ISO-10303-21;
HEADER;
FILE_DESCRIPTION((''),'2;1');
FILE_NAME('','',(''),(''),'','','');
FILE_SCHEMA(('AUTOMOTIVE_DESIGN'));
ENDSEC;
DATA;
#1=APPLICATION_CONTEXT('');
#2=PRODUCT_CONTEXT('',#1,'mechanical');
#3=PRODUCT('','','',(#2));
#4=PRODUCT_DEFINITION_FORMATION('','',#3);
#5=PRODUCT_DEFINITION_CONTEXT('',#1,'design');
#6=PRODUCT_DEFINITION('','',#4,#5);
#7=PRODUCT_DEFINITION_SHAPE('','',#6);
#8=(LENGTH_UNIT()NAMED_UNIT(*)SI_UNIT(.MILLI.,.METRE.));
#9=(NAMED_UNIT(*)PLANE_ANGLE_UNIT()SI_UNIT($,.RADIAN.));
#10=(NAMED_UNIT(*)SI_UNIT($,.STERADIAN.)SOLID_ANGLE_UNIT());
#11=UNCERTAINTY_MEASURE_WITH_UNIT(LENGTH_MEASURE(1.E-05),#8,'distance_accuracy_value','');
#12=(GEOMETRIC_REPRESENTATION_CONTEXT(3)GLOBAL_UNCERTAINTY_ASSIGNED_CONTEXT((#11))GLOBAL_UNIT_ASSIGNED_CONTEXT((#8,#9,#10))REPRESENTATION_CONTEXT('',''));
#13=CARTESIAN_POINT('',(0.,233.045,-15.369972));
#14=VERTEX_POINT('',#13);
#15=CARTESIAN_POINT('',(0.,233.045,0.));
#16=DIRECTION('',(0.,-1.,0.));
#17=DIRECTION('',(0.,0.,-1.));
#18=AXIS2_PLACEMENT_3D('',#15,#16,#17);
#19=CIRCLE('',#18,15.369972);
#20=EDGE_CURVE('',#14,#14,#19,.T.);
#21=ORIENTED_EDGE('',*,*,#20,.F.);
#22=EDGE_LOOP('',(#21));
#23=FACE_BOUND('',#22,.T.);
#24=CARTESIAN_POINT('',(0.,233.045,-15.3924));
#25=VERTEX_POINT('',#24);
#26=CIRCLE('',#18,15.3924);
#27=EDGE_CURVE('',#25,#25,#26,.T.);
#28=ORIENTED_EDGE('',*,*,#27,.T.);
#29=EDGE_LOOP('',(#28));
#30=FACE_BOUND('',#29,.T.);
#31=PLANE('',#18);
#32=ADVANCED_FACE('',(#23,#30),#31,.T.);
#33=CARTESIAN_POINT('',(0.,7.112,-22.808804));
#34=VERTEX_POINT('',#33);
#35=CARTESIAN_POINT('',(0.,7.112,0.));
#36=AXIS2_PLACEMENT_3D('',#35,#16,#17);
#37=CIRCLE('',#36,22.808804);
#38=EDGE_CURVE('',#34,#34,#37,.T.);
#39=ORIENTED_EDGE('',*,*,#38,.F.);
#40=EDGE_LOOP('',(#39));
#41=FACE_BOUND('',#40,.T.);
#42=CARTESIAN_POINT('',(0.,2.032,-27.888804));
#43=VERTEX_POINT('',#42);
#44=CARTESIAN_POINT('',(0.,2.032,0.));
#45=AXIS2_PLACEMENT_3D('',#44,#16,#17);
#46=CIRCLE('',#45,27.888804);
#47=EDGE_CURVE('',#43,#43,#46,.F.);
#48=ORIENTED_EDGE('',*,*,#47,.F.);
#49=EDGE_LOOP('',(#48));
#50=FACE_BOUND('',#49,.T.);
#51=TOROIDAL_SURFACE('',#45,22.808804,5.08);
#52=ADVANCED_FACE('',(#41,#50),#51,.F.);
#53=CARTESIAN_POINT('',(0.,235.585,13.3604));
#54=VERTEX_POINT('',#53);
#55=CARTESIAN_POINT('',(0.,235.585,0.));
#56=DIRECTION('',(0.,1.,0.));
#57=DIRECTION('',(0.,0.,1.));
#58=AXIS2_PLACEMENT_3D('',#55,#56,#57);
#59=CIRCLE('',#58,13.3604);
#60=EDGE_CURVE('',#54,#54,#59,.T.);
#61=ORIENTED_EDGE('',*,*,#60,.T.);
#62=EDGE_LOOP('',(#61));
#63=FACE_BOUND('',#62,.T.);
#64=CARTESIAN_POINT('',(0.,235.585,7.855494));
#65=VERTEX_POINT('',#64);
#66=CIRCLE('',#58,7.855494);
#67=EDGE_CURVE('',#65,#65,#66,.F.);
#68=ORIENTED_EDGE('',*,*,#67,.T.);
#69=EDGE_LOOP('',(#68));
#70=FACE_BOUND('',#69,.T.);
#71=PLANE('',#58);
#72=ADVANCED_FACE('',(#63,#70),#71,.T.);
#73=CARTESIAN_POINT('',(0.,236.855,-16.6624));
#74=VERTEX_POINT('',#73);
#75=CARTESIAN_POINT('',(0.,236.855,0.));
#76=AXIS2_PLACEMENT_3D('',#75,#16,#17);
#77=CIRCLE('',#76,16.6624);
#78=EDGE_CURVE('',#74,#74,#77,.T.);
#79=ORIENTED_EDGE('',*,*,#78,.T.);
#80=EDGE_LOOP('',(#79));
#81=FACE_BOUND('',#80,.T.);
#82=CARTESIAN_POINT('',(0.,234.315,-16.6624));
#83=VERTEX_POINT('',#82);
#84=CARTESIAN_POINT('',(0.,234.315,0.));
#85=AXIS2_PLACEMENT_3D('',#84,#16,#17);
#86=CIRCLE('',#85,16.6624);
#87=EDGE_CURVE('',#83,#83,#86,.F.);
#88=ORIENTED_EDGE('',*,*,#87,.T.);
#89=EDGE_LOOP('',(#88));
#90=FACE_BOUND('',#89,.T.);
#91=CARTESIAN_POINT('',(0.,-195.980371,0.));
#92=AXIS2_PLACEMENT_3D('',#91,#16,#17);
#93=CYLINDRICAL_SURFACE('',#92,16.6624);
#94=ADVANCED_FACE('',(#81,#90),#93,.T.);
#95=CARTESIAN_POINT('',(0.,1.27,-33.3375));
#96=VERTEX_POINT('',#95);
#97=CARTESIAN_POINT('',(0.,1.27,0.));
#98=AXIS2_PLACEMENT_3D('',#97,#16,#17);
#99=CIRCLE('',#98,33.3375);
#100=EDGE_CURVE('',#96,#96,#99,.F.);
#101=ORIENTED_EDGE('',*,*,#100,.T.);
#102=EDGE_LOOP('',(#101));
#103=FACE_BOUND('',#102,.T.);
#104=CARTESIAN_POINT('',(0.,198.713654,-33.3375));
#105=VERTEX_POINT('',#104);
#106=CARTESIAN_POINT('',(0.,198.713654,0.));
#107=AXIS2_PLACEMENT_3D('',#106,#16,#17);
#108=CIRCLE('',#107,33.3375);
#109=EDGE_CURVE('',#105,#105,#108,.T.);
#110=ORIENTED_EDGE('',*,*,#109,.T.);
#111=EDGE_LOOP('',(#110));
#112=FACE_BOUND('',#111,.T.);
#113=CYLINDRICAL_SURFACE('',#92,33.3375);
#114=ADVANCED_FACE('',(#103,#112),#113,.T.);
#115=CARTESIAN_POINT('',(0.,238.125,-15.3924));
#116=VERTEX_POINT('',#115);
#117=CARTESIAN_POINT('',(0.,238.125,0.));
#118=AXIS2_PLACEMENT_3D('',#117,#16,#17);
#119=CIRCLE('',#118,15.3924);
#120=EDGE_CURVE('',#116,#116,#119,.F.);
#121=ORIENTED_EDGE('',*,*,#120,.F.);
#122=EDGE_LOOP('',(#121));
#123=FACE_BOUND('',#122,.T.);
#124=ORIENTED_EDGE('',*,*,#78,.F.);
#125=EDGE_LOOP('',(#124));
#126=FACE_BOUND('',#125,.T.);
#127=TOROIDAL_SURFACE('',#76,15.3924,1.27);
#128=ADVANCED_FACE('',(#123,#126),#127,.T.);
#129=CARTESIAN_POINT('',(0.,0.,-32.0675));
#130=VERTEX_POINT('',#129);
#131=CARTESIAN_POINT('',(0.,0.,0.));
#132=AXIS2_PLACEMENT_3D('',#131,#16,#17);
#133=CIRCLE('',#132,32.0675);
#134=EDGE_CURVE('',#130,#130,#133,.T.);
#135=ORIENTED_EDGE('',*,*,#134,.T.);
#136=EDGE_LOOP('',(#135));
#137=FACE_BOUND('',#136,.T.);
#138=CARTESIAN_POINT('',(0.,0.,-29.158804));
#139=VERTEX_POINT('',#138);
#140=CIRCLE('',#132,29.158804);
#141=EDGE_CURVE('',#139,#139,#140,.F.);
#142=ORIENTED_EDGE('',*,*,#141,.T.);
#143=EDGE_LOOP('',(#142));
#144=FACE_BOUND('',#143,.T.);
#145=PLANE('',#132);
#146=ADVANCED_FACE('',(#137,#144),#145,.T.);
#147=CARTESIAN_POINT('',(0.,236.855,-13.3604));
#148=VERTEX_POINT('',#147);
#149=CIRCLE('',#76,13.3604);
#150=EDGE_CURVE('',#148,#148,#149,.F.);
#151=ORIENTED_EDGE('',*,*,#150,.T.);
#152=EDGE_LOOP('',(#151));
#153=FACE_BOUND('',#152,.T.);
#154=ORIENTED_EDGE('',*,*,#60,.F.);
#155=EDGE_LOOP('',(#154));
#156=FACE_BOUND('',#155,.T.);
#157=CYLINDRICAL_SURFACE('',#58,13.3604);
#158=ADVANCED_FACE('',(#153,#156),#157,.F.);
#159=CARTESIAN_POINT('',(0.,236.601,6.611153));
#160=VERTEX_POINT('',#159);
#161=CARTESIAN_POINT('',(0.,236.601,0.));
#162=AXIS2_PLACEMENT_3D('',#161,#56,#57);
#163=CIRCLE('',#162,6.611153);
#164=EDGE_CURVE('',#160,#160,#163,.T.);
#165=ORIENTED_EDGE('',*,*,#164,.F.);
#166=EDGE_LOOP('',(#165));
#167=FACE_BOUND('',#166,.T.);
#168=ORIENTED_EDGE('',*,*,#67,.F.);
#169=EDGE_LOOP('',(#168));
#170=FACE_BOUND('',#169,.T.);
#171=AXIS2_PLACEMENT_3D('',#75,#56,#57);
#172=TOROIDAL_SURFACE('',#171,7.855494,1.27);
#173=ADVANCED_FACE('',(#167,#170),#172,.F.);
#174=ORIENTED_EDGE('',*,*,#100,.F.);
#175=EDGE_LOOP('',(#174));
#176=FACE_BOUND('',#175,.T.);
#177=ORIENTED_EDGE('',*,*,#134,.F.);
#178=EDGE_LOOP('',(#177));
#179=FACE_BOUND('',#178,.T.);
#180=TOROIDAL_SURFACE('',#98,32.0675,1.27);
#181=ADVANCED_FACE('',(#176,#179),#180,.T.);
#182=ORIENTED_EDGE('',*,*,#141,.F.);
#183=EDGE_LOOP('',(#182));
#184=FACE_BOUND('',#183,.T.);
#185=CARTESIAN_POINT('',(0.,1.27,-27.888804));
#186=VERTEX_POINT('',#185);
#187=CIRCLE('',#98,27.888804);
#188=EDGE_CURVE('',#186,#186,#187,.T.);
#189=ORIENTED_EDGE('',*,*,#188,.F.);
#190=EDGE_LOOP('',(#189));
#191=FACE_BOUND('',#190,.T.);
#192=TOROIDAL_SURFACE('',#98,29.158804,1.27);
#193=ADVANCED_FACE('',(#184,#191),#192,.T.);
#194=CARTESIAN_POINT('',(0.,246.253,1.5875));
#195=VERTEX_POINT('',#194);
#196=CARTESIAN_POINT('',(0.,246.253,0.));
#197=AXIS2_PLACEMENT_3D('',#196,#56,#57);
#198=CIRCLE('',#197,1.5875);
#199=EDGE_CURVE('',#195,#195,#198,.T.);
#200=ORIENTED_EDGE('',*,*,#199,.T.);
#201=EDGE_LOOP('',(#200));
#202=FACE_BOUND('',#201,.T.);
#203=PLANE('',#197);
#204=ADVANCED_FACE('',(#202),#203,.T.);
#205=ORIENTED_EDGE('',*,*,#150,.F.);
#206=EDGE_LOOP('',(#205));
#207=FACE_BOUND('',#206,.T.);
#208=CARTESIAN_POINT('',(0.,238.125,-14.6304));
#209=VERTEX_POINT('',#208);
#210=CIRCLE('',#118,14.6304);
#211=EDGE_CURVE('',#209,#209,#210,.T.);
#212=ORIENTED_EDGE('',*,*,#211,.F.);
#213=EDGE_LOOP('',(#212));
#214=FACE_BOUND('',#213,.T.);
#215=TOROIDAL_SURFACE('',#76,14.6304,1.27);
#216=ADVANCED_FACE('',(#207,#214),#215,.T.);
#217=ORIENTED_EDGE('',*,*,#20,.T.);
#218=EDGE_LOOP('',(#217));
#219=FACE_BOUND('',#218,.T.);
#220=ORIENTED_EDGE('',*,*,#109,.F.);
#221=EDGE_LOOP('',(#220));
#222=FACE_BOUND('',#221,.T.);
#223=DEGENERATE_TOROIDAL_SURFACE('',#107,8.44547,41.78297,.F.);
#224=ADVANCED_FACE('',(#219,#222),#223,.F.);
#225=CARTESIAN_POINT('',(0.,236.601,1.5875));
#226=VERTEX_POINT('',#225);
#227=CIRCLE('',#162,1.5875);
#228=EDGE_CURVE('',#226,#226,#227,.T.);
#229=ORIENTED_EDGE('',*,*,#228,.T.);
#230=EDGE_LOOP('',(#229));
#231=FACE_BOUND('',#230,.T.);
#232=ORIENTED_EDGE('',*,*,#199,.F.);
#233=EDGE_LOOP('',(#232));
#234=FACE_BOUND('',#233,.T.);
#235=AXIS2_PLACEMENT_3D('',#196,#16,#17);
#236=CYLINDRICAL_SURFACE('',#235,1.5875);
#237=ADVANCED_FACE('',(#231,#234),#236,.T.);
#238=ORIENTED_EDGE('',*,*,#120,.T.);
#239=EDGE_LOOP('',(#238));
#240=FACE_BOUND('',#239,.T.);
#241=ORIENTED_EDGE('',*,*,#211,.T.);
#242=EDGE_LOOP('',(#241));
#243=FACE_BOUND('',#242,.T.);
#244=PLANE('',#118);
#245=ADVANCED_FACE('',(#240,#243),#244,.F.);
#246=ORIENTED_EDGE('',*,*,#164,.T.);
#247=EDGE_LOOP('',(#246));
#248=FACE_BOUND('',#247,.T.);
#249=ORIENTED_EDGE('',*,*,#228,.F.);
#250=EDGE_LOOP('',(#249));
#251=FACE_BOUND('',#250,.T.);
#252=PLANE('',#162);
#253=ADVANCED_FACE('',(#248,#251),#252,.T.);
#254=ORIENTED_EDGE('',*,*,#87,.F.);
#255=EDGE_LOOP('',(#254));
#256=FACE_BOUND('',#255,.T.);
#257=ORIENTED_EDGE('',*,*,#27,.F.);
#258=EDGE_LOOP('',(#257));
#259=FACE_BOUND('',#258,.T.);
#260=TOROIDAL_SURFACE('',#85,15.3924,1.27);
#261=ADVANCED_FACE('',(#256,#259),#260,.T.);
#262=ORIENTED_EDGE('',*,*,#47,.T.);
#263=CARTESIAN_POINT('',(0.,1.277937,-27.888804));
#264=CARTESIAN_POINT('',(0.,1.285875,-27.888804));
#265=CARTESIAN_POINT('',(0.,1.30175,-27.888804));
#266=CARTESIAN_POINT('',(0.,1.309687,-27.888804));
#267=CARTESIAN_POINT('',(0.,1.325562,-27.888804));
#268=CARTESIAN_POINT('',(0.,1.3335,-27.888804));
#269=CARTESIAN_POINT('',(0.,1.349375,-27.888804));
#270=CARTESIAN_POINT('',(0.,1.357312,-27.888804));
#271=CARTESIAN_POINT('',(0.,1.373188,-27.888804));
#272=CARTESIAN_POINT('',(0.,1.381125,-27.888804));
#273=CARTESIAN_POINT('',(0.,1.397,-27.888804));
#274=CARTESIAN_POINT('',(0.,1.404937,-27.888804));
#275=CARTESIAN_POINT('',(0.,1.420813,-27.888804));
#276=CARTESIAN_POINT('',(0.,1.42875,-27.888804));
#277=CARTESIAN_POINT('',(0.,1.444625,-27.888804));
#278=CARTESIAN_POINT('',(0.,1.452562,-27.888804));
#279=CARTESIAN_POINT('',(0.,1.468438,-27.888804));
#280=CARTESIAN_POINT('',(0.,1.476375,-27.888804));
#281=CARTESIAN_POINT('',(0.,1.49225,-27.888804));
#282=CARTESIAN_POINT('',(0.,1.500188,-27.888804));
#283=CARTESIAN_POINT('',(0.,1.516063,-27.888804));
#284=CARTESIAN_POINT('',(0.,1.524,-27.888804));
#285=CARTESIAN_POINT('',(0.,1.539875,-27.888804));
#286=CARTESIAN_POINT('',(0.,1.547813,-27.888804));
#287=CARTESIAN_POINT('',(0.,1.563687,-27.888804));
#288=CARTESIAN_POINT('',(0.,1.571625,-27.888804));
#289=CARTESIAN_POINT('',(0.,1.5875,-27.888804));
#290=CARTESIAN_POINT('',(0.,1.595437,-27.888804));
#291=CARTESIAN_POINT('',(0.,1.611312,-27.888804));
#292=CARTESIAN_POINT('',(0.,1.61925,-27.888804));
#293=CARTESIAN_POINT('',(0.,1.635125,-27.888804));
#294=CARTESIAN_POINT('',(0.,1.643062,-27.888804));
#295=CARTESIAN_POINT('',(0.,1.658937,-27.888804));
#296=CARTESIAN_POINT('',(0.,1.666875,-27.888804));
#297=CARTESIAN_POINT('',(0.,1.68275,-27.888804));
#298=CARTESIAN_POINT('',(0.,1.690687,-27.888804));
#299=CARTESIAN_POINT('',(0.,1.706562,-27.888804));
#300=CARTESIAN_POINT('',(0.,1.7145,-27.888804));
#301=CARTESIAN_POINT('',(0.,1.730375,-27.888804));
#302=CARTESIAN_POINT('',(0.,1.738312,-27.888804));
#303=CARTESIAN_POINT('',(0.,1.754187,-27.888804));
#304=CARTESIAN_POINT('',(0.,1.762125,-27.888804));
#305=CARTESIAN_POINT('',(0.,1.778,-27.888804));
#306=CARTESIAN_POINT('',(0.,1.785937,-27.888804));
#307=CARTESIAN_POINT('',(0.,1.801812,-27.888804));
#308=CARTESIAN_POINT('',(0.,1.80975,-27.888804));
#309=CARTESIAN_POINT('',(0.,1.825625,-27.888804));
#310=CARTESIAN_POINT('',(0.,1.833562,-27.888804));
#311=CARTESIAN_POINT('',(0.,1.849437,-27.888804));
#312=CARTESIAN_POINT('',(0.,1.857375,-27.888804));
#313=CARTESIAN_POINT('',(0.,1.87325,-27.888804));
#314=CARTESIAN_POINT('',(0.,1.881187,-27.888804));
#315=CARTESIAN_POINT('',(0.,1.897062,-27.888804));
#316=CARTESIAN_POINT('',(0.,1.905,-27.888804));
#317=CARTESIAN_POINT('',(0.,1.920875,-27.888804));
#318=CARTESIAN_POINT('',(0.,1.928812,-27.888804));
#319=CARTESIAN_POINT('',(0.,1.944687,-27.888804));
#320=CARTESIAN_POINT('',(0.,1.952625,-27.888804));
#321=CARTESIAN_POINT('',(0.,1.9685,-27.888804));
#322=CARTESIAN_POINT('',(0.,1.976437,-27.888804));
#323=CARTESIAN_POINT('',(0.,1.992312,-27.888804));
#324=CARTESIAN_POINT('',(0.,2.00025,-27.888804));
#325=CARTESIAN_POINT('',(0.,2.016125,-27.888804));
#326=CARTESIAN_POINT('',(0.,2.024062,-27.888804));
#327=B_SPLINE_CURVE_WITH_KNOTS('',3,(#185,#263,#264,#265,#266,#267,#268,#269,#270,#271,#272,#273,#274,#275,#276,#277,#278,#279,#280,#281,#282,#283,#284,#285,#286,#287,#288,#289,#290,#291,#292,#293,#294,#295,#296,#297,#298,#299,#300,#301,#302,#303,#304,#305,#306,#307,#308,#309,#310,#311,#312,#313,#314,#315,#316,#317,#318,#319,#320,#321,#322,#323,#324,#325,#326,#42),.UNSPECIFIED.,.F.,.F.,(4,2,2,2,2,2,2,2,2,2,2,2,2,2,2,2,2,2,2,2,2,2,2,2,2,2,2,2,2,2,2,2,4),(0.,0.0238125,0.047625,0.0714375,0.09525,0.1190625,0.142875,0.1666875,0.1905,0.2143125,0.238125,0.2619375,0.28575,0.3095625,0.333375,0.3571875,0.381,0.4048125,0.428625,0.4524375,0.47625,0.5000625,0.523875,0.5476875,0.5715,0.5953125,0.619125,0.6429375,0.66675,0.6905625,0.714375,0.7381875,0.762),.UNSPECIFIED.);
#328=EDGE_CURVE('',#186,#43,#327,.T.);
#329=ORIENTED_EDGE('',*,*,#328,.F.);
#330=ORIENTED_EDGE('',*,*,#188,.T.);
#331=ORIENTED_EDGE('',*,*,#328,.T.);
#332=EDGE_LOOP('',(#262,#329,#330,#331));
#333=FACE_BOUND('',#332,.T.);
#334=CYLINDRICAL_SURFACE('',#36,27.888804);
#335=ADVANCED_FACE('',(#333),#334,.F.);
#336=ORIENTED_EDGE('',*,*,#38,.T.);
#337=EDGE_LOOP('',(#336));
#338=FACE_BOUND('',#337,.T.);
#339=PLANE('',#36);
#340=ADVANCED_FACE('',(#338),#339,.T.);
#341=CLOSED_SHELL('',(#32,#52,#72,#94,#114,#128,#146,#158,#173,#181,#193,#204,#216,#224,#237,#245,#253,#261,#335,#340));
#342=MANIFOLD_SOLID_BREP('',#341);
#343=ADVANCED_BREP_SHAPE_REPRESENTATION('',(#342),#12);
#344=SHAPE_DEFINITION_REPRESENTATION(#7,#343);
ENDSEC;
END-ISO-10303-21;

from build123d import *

# Parameters (mm, degrees)
SKETCH2_R           = 13.3604
CUT_EXTRUDE1_DEPTH  = 2.54
SKETCH3_R           = 6.611152939
BOSS_EXTRUDE1_DEPTH = 1.016
SKETCH4_R           = 1.5875
BOSS_EXTRUDE2_DEPTH = 9.652
SKETCH8_R           = 27.888803879
CUT_EXTRUDE2_DEPTH  = 7.112
FILLET1_R           = 5.08
FILLET4_R           = 1.27
FILLET5_R           = 1.27
FILLET6_R           = 1.27
FILLET7_R           = 1.27
FILLET8_R           = 1.27


with BuildPart() as part:
    # Sketch1 → Revolve1 (revolve)
    with BuildSketch(Plane.XY, mode=Mode.PRIVATE) as revolve1_sk:
        with BuildLine():
            Line((0, 233.045), (0, 0))
            Line((0, 0), (33.3375, 0))
            Line((33.3375, 0), (33.3375, 198.713653717))
            ThreePointArc((33.3375, 198.713653717), (28.574095551, 218.088078948), (15.369971666, 233.045))
            Line((15.369971666, 233.045), (0, 233.045))
        make_face()
        Polygon((0, 238.125), (0, 233.045), (15.369971666, 233.045), (16.6624, 233.045), (16.6624, 238.125), align=None)
    revolve(revolve1_sk.sketch.rotate(Axis((0, -195.980371031, 0), (0, 1, 0)), 90), axis=Axis((0, -195.980371031, 0), (0, 1, 0)))

    # Sketch2 → Cut-Extrude1 (cut)
    with BuildSketch(Plane(origin=(0, 238.125, 0), x_dir=(1, 0, 0), z_dir=(0, 1, 0))):
        with Locations(Location((0, 0, 0), (0, 0, 270))):
            Circle(SKETCH2_R)
    extrude(amount=-CUT_EXTRUDE1_DEPTH, mode=Mode.SUBTRACT)

    # Sketch3 → Boss-Extrude1 (add)
    with BuildSketch(Plane(origin=(0, 235.585, 0), x_dir=(1, 0, 0), z_dir=(0, 1, 0))):
        with Locations(Location((0, 0, 0), (0, 0, 270))):
            Circle(SKETCH3_R)
    extrude(amount=BOSS_EXTRUDE1_DEPTH)

    # Sketch4 → Boss-Extrude2 (add)
    with BuildSketch(Plane(origin=(0, 236.601, 0), x_dir=(1, 0, 0), z_dir=(0, 1, 0))):
        with Locations(Location((0, 0, 0), (0, 0, 270))):
            Circle(SKETCH4_R)
    extrude(amount=BOSS_EXTRUDE2_DEPTH)

    # Sketch8 → Cut-Extrude2 (cut)
    with BuildSketch(Plane.XZ):
        with Locations(Location((0, 0, 0), (0, 0, 270))):
            Circle(SKETCH8_R)
    extrude(amount=-CUT_EXTRUDE2_DEPTH, mode=Mode.SUBTRACT)

    # Fillet1
    fillet1_edges = [part.edges().sort_by_distance(p)[0] for p in [
        (0, 7.112, 27.888803879),
    ]]
    fillet(fillet1_edges, radius=FILLET1_R)

    # Fillet4
    fillet4_edges = [part.edges().sort_by_distance(p)[0] for p in [
        (0, 238.125, 16.6624),
        (0, 233.045, 16.6624),
    ]]
    fillet(fillet4_edges, radius=FILLET4_R)

    # Fillet5
    fillet5_edges = [part.edges().sort_by_distance(p)[0] for p in [
        (0, 238.125, -13.3604),
    ]]
    fillet(fillet5_edges, radius=FILLET5_R)

    # Fillet6
    fillet6_edges = [part.edges().sort_by_distance(p)[0] for p in [
        (0, 0, 33.3375),
    ]]
    fillet(fillet6_edges, radius=FILLET6_R)

    # Fillet7
    fillet7_edges = [part.edges().sort_by_distance(p)[0] for p in [
        (0, 0, 27.888803879),
    ]]
    fillet(fillet7_edges, radius=FILLET7_R)

    # Fillet8
    # the kernel refuses this fillet: 1.27 mm, written as the material it adds along each edge
    with BuildSketch(Plane(origin=(0, 235.585, 0), x_dir=(0, 0, 1), z_dir=(-1, 0, 0))) as fillet8_piece_1:
        with BuildLine():
            CenterArc((7.855493729, 1.27), FILLET8_R, 191.536959033, 78.463040967)
            Line((6.611152939, 1.016), (6.586266124, 1.01092))
            ThreePointArc((6.586266124, 1.01092), (6.585752939, 0.508), (6.585752939, 0))
            Line((6.585752939, 0), (6.611152939, -0.0254))
            Line((6.611152939, -0.0254), (7.855493729, -0.0254))
            Line((7.855493729, -0.0254), (7.855493729, 0))
        make_face()
    revolve(axis=Axis((0, 235.585, 0), (0, 1, 0)))


solid = part.part
